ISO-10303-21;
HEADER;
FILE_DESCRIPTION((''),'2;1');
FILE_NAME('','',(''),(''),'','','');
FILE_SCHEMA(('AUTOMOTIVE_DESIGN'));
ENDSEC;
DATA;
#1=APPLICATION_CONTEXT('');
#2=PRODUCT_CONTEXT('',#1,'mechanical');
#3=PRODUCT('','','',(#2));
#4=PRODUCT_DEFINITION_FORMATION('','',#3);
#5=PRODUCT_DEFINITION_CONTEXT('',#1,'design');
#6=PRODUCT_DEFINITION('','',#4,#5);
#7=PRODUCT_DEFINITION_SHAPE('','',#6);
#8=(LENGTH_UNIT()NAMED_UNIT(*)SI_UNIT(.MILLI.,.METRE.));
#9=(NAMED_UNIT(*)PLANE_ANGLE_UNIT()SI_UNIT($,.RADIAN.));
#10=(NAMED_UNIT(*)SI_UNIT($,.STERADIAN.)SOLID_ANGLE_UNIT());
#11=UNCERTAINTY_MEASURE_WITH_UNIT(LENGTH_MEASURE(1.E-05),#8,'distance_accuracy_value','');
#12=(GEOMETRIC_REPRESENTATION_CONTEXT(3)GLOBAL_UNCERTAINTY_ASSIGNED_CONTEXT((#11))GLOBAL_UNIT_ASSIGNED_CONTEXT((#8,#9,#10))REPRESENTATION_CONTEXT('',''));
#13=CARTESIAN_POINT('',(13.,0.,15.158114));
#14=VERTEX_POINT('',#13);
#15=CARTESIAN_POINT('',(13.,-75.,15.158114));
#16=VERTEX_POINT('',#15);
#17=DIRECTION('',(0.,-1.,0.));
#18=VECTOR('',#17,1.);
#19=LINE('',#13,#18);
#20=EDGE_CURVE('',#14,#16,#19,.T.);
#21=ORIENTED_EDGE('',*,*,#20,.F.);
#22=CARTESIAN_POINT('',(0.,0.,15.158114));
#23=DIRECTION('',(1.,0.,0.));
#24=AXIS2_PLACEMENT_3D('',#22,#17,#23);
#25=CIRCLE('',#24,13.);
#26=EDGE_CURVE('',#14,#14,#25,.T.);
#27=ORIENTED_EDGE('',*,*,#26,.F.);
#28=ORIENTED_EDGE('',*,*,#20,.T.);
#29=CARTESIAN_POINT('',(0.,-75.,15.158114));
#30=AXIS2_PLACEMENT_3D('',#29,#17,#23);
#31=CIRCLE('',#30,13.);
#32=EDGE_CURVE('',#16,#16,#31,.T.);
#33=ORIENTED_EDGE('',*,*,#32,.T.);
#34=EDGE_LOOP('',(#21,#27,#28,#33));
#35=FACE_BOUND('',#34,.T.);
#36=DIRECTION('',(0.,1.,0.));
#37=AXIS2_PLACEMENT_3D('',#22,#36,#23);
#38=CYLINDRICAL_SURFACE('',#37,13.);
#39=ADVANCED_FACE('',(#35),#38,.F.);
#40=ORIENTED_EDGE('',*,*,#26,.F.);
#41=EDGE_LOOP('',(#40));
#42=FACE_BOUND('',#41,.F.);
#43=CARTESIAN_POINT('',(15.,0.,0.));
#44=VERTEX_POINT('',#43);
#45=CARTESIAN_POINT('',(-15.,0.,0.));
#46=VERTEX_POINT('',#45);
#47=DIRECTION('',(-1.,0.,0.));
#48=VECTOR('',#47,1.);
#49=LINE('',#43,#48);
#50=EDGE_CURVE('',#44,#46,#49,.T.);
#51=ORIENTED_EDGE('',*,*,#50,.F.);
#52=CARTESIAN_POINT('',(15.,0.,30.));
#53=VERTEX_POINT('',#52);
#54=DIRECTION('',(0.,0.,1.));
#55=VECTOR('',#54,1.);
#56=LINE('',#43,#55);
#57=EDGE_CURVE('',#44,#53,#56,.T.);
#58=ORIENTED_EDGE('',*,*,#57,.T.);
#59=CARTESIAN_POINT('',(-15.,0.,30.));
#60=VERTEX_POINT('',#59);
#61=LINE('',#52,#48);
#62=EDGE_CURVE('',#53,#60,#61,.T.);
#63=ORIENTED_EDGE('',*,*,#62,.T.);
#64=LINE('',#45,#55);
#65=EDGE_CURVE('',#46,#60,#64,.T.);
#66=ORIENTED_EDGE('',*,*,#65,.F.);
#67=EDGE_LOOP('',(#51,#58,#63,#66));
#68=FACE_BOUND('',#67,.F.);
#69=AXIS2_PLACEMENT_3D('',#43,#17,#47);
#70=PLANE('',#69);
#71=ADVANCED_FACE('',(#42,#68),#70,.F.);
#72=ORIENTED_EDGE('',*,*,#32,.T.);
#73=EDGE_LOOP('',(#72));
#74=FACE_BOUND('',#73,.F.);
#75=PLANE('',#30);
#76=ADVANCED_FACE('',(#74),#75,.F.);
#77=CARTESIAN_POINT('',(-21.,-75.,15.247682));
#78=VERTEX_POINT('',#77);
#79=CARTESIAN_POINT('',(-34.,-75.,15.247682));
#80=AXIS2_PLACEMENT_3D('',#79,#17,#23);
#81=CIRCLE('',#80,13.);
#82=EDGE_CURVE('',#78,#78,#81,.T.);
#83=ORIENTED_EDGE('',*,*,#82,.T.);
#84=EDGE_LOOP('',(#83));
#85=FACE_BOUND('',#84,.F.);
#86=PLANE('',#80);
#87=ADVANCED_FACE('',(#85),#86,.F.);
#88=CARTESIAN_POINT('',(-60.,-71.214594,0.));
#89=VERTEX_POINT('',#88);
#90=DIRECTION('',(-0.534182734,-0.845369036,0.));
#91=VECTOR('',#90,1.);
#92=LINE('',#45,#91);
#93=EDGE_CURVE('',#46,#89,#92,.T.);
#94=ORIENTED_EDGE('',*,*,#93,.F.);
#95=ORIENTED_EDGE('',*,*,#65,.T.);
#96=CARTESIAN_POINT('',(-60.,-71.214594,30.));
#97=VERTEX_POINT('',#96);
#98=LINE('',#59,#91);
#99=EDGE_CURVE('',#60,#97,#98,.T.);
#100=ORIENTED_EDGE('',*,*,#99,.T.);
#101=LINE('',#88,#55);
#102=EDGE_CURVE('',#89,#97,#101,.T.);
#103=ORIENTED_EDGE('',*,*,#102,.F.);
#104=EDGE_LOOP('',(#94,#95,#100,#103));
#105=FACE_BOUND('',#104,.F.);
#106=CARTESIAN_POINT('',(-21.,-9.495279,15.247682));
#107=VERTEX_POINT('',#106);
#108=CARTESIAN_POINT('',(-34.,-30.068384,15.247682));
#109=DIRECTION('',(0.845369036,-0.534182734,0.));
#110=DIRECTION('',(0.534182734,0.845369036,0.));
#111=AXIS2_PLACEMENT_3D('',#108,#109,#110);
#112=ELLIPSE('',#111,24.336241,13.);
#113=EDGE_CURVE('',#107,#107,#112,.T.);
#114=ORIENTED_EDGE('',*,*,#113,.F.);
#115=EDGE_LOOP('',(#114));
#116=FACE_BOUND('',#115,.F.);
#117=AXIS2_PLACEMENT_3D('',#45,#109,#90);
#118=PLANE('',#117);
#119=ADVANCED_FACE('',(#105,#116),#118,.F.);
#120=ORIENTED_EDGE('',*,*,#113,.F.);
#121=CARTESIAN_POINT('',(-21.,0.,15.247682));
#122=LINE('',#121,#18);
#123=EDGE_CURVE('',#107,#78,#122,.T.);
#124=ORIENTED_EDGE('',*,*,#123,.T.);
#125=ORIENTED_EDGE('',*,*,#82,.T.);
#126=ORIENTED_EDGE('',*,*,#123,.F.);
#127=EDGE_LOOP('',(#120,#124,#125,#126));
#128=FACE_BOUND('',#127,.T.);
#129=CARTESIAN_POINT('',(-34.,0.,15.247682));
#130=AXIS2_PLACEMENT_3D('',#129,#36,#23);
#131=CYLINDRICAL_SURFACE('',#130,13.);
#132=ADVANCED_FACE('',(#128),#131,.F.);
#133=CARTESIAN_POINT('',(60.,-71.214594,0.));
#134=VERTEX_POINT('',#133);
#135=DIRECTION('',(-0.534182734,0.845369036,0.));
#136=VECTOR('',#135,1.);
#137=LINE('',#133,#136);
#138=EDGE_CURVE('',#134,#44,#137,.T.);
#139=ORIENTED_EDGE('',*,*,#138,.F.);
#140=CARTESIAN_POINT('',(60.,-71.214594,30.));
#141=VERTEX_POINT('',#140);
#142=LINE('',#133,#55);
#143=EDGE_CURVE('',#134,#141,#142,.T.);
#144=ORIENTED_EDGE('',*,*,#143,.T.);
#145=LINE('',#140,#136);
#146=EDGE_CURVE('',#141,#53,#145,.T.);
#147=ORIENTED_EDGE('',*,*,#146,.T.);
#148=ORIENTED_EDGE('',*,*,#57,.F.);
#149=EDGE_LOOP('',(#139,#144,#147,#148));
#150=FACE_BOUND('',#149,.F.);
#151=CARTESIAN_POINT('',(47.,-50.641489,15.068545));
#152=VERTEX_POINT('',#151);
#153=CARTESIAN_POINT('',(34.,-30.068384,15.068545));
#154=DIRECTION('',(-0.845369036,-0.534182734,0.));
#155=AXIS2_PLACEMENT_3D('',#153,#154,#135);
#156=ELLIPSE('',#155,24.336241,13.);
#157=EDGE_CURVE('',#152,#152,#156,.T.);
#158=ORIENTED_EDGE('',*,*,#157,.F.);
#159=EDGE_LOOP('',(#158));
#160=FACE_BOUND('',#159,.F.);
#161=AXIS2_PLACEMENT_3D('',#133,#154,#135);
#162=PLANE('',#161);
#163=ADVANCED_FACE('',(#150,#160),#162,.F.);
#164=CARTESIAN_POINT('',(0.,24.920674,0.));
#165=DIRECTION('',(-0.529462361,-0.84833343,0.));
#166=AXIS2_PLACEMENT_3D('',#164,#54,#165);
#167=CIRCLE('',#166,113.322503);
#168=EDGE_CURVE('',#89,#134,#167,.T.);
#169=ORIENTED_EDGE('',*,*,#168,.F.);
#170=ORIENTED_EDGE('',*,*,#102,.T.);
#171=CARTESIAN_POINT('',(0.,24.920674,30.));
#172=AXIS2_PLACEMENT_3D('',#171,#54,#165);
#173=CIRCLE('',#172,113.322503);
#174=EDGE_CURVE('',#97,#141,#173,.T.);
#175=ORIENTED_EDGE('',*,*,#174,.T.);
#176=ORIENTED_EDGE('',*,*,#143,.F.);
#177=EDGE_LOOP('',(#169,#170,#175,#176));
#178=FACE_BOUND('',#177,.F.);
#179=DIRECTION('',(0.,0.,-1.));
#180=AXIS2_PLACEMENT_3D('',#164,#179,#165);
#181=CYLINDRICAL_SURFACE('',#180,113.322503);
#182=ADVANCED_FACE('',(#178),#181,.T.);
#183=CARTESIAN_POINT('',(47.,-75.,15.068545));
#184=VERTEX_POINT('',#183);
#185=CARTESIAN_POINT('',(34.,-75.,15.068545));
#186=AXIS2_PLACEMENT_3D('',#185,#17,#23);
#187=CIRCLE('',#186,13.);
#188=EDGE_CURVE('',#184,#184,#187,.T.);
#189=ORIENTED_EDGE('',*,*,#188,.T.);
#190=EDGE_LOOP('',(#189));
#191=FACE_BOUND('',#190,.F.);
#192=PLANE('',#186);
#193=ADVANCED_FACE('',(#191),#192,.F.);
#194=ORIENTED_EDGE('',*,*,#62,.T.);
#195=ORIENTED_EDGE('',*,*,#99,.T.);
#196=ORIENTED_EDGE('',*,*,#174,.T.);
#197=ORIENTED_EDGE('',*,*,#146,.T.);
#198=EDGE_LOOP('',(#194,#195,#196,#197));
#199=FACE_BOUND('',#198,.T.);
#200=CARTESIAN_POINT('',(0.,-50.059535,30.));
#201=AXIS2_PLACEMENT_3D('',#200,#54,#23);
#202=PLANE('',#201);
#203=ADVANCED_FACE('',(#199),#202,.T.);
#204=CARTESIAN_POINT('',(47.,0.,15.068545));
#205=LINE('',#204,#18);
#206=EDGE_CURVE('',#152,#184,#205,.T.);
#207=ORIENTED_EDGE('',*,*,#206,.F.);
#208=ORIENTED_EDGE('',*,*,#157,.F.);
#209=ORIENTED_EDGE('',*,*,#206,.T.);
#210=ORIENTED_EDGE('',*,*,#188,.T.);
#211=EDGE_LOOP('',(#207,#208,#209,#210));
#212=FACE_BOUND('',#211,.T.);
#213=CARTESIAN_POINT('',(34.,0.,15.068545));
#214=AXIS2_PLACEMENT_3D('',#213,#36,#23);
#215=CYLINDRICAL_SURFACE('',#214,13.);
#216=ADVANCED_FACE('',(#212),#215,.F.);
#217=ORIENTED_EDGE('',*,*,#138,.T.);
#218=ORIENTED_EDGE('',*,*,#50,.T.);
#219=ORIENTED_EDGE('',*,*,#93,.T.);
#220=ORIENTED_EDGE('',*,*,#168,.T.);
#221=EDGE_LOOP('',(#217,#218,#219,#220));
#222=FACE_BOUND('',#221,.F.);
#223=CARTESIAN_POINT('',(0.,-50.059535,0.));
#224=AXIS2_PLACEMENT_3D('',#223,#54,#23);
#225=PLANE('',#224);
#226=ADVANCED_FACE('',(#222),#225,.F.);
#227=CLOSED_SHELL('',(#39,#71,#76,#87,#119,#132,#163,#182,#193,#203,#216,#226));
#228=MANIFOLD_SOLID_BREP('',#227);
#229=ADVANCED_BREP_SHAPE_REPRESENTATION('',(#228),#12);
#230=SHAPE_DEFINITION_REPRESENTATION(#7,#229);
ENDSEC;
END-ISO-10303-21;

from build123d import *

# Parameters (mm, degrees)
F1_DEPTH = 30
F3_R     = 13
F3_R_2   = 11
F4_DEPTH = 75


# Not quite as in the source:
# - the program builds the solid bodies; features that only make, move or delete a surface that nothing else refers to are left out


with BuildPart() as f1:
    # F0 (on Top) → F1 (new body)
    with BuildSketch(Plane.XY):
        with BuildLine():
            Line((0, 0), (-15, 0))
            Line((-15, 0), (-60, -71.2145941459))
            ThreePointArc((-60, -71.2145941459), (0, -88.4018294902), (60, -71.2145941459))
            Line((60, -71.2145941459), (15, 0))
            Line((15, 0), (0, 0))
        make_face()
    extrude(amount=F1_DEPTH)

    # F3 (on Front) → F4 (cut)
    with BuildSketch(Plane.XZ):
        with Locations((-34, 15.2476818305)):
            Circle(F3_R)
        with Locations((-34, 15.2476818305)):
            Circle(F3_R_2, mode=Mode.SUBTRACT)
        with Locations((0, 15.1581136116)):
            Circle(F3_R)
        with Locations((0, 15.1581136116)):
            Circle(F3_R_2, mode=Mode.SUBTRACT)
        with Locations((34, 15.0685453927)):
            Circle(F3_R)
        with Locations((34, 15.0685453927)):
            Circle(F3_R_2, mode=Mode.SUBTRACT)
        with Locations((0, 15.1581136116)):
            Circle(F3_R_2)
        with Locations((34, 15.0685453927)):
            Circle(F3_R_2)
        with Locations((-34, 15.2476818305)):
            Circle(F3_R_2)
    extrude(amount=F4_DEPTH, mode=Mode.SUBTRACT)


solid = f1.part
